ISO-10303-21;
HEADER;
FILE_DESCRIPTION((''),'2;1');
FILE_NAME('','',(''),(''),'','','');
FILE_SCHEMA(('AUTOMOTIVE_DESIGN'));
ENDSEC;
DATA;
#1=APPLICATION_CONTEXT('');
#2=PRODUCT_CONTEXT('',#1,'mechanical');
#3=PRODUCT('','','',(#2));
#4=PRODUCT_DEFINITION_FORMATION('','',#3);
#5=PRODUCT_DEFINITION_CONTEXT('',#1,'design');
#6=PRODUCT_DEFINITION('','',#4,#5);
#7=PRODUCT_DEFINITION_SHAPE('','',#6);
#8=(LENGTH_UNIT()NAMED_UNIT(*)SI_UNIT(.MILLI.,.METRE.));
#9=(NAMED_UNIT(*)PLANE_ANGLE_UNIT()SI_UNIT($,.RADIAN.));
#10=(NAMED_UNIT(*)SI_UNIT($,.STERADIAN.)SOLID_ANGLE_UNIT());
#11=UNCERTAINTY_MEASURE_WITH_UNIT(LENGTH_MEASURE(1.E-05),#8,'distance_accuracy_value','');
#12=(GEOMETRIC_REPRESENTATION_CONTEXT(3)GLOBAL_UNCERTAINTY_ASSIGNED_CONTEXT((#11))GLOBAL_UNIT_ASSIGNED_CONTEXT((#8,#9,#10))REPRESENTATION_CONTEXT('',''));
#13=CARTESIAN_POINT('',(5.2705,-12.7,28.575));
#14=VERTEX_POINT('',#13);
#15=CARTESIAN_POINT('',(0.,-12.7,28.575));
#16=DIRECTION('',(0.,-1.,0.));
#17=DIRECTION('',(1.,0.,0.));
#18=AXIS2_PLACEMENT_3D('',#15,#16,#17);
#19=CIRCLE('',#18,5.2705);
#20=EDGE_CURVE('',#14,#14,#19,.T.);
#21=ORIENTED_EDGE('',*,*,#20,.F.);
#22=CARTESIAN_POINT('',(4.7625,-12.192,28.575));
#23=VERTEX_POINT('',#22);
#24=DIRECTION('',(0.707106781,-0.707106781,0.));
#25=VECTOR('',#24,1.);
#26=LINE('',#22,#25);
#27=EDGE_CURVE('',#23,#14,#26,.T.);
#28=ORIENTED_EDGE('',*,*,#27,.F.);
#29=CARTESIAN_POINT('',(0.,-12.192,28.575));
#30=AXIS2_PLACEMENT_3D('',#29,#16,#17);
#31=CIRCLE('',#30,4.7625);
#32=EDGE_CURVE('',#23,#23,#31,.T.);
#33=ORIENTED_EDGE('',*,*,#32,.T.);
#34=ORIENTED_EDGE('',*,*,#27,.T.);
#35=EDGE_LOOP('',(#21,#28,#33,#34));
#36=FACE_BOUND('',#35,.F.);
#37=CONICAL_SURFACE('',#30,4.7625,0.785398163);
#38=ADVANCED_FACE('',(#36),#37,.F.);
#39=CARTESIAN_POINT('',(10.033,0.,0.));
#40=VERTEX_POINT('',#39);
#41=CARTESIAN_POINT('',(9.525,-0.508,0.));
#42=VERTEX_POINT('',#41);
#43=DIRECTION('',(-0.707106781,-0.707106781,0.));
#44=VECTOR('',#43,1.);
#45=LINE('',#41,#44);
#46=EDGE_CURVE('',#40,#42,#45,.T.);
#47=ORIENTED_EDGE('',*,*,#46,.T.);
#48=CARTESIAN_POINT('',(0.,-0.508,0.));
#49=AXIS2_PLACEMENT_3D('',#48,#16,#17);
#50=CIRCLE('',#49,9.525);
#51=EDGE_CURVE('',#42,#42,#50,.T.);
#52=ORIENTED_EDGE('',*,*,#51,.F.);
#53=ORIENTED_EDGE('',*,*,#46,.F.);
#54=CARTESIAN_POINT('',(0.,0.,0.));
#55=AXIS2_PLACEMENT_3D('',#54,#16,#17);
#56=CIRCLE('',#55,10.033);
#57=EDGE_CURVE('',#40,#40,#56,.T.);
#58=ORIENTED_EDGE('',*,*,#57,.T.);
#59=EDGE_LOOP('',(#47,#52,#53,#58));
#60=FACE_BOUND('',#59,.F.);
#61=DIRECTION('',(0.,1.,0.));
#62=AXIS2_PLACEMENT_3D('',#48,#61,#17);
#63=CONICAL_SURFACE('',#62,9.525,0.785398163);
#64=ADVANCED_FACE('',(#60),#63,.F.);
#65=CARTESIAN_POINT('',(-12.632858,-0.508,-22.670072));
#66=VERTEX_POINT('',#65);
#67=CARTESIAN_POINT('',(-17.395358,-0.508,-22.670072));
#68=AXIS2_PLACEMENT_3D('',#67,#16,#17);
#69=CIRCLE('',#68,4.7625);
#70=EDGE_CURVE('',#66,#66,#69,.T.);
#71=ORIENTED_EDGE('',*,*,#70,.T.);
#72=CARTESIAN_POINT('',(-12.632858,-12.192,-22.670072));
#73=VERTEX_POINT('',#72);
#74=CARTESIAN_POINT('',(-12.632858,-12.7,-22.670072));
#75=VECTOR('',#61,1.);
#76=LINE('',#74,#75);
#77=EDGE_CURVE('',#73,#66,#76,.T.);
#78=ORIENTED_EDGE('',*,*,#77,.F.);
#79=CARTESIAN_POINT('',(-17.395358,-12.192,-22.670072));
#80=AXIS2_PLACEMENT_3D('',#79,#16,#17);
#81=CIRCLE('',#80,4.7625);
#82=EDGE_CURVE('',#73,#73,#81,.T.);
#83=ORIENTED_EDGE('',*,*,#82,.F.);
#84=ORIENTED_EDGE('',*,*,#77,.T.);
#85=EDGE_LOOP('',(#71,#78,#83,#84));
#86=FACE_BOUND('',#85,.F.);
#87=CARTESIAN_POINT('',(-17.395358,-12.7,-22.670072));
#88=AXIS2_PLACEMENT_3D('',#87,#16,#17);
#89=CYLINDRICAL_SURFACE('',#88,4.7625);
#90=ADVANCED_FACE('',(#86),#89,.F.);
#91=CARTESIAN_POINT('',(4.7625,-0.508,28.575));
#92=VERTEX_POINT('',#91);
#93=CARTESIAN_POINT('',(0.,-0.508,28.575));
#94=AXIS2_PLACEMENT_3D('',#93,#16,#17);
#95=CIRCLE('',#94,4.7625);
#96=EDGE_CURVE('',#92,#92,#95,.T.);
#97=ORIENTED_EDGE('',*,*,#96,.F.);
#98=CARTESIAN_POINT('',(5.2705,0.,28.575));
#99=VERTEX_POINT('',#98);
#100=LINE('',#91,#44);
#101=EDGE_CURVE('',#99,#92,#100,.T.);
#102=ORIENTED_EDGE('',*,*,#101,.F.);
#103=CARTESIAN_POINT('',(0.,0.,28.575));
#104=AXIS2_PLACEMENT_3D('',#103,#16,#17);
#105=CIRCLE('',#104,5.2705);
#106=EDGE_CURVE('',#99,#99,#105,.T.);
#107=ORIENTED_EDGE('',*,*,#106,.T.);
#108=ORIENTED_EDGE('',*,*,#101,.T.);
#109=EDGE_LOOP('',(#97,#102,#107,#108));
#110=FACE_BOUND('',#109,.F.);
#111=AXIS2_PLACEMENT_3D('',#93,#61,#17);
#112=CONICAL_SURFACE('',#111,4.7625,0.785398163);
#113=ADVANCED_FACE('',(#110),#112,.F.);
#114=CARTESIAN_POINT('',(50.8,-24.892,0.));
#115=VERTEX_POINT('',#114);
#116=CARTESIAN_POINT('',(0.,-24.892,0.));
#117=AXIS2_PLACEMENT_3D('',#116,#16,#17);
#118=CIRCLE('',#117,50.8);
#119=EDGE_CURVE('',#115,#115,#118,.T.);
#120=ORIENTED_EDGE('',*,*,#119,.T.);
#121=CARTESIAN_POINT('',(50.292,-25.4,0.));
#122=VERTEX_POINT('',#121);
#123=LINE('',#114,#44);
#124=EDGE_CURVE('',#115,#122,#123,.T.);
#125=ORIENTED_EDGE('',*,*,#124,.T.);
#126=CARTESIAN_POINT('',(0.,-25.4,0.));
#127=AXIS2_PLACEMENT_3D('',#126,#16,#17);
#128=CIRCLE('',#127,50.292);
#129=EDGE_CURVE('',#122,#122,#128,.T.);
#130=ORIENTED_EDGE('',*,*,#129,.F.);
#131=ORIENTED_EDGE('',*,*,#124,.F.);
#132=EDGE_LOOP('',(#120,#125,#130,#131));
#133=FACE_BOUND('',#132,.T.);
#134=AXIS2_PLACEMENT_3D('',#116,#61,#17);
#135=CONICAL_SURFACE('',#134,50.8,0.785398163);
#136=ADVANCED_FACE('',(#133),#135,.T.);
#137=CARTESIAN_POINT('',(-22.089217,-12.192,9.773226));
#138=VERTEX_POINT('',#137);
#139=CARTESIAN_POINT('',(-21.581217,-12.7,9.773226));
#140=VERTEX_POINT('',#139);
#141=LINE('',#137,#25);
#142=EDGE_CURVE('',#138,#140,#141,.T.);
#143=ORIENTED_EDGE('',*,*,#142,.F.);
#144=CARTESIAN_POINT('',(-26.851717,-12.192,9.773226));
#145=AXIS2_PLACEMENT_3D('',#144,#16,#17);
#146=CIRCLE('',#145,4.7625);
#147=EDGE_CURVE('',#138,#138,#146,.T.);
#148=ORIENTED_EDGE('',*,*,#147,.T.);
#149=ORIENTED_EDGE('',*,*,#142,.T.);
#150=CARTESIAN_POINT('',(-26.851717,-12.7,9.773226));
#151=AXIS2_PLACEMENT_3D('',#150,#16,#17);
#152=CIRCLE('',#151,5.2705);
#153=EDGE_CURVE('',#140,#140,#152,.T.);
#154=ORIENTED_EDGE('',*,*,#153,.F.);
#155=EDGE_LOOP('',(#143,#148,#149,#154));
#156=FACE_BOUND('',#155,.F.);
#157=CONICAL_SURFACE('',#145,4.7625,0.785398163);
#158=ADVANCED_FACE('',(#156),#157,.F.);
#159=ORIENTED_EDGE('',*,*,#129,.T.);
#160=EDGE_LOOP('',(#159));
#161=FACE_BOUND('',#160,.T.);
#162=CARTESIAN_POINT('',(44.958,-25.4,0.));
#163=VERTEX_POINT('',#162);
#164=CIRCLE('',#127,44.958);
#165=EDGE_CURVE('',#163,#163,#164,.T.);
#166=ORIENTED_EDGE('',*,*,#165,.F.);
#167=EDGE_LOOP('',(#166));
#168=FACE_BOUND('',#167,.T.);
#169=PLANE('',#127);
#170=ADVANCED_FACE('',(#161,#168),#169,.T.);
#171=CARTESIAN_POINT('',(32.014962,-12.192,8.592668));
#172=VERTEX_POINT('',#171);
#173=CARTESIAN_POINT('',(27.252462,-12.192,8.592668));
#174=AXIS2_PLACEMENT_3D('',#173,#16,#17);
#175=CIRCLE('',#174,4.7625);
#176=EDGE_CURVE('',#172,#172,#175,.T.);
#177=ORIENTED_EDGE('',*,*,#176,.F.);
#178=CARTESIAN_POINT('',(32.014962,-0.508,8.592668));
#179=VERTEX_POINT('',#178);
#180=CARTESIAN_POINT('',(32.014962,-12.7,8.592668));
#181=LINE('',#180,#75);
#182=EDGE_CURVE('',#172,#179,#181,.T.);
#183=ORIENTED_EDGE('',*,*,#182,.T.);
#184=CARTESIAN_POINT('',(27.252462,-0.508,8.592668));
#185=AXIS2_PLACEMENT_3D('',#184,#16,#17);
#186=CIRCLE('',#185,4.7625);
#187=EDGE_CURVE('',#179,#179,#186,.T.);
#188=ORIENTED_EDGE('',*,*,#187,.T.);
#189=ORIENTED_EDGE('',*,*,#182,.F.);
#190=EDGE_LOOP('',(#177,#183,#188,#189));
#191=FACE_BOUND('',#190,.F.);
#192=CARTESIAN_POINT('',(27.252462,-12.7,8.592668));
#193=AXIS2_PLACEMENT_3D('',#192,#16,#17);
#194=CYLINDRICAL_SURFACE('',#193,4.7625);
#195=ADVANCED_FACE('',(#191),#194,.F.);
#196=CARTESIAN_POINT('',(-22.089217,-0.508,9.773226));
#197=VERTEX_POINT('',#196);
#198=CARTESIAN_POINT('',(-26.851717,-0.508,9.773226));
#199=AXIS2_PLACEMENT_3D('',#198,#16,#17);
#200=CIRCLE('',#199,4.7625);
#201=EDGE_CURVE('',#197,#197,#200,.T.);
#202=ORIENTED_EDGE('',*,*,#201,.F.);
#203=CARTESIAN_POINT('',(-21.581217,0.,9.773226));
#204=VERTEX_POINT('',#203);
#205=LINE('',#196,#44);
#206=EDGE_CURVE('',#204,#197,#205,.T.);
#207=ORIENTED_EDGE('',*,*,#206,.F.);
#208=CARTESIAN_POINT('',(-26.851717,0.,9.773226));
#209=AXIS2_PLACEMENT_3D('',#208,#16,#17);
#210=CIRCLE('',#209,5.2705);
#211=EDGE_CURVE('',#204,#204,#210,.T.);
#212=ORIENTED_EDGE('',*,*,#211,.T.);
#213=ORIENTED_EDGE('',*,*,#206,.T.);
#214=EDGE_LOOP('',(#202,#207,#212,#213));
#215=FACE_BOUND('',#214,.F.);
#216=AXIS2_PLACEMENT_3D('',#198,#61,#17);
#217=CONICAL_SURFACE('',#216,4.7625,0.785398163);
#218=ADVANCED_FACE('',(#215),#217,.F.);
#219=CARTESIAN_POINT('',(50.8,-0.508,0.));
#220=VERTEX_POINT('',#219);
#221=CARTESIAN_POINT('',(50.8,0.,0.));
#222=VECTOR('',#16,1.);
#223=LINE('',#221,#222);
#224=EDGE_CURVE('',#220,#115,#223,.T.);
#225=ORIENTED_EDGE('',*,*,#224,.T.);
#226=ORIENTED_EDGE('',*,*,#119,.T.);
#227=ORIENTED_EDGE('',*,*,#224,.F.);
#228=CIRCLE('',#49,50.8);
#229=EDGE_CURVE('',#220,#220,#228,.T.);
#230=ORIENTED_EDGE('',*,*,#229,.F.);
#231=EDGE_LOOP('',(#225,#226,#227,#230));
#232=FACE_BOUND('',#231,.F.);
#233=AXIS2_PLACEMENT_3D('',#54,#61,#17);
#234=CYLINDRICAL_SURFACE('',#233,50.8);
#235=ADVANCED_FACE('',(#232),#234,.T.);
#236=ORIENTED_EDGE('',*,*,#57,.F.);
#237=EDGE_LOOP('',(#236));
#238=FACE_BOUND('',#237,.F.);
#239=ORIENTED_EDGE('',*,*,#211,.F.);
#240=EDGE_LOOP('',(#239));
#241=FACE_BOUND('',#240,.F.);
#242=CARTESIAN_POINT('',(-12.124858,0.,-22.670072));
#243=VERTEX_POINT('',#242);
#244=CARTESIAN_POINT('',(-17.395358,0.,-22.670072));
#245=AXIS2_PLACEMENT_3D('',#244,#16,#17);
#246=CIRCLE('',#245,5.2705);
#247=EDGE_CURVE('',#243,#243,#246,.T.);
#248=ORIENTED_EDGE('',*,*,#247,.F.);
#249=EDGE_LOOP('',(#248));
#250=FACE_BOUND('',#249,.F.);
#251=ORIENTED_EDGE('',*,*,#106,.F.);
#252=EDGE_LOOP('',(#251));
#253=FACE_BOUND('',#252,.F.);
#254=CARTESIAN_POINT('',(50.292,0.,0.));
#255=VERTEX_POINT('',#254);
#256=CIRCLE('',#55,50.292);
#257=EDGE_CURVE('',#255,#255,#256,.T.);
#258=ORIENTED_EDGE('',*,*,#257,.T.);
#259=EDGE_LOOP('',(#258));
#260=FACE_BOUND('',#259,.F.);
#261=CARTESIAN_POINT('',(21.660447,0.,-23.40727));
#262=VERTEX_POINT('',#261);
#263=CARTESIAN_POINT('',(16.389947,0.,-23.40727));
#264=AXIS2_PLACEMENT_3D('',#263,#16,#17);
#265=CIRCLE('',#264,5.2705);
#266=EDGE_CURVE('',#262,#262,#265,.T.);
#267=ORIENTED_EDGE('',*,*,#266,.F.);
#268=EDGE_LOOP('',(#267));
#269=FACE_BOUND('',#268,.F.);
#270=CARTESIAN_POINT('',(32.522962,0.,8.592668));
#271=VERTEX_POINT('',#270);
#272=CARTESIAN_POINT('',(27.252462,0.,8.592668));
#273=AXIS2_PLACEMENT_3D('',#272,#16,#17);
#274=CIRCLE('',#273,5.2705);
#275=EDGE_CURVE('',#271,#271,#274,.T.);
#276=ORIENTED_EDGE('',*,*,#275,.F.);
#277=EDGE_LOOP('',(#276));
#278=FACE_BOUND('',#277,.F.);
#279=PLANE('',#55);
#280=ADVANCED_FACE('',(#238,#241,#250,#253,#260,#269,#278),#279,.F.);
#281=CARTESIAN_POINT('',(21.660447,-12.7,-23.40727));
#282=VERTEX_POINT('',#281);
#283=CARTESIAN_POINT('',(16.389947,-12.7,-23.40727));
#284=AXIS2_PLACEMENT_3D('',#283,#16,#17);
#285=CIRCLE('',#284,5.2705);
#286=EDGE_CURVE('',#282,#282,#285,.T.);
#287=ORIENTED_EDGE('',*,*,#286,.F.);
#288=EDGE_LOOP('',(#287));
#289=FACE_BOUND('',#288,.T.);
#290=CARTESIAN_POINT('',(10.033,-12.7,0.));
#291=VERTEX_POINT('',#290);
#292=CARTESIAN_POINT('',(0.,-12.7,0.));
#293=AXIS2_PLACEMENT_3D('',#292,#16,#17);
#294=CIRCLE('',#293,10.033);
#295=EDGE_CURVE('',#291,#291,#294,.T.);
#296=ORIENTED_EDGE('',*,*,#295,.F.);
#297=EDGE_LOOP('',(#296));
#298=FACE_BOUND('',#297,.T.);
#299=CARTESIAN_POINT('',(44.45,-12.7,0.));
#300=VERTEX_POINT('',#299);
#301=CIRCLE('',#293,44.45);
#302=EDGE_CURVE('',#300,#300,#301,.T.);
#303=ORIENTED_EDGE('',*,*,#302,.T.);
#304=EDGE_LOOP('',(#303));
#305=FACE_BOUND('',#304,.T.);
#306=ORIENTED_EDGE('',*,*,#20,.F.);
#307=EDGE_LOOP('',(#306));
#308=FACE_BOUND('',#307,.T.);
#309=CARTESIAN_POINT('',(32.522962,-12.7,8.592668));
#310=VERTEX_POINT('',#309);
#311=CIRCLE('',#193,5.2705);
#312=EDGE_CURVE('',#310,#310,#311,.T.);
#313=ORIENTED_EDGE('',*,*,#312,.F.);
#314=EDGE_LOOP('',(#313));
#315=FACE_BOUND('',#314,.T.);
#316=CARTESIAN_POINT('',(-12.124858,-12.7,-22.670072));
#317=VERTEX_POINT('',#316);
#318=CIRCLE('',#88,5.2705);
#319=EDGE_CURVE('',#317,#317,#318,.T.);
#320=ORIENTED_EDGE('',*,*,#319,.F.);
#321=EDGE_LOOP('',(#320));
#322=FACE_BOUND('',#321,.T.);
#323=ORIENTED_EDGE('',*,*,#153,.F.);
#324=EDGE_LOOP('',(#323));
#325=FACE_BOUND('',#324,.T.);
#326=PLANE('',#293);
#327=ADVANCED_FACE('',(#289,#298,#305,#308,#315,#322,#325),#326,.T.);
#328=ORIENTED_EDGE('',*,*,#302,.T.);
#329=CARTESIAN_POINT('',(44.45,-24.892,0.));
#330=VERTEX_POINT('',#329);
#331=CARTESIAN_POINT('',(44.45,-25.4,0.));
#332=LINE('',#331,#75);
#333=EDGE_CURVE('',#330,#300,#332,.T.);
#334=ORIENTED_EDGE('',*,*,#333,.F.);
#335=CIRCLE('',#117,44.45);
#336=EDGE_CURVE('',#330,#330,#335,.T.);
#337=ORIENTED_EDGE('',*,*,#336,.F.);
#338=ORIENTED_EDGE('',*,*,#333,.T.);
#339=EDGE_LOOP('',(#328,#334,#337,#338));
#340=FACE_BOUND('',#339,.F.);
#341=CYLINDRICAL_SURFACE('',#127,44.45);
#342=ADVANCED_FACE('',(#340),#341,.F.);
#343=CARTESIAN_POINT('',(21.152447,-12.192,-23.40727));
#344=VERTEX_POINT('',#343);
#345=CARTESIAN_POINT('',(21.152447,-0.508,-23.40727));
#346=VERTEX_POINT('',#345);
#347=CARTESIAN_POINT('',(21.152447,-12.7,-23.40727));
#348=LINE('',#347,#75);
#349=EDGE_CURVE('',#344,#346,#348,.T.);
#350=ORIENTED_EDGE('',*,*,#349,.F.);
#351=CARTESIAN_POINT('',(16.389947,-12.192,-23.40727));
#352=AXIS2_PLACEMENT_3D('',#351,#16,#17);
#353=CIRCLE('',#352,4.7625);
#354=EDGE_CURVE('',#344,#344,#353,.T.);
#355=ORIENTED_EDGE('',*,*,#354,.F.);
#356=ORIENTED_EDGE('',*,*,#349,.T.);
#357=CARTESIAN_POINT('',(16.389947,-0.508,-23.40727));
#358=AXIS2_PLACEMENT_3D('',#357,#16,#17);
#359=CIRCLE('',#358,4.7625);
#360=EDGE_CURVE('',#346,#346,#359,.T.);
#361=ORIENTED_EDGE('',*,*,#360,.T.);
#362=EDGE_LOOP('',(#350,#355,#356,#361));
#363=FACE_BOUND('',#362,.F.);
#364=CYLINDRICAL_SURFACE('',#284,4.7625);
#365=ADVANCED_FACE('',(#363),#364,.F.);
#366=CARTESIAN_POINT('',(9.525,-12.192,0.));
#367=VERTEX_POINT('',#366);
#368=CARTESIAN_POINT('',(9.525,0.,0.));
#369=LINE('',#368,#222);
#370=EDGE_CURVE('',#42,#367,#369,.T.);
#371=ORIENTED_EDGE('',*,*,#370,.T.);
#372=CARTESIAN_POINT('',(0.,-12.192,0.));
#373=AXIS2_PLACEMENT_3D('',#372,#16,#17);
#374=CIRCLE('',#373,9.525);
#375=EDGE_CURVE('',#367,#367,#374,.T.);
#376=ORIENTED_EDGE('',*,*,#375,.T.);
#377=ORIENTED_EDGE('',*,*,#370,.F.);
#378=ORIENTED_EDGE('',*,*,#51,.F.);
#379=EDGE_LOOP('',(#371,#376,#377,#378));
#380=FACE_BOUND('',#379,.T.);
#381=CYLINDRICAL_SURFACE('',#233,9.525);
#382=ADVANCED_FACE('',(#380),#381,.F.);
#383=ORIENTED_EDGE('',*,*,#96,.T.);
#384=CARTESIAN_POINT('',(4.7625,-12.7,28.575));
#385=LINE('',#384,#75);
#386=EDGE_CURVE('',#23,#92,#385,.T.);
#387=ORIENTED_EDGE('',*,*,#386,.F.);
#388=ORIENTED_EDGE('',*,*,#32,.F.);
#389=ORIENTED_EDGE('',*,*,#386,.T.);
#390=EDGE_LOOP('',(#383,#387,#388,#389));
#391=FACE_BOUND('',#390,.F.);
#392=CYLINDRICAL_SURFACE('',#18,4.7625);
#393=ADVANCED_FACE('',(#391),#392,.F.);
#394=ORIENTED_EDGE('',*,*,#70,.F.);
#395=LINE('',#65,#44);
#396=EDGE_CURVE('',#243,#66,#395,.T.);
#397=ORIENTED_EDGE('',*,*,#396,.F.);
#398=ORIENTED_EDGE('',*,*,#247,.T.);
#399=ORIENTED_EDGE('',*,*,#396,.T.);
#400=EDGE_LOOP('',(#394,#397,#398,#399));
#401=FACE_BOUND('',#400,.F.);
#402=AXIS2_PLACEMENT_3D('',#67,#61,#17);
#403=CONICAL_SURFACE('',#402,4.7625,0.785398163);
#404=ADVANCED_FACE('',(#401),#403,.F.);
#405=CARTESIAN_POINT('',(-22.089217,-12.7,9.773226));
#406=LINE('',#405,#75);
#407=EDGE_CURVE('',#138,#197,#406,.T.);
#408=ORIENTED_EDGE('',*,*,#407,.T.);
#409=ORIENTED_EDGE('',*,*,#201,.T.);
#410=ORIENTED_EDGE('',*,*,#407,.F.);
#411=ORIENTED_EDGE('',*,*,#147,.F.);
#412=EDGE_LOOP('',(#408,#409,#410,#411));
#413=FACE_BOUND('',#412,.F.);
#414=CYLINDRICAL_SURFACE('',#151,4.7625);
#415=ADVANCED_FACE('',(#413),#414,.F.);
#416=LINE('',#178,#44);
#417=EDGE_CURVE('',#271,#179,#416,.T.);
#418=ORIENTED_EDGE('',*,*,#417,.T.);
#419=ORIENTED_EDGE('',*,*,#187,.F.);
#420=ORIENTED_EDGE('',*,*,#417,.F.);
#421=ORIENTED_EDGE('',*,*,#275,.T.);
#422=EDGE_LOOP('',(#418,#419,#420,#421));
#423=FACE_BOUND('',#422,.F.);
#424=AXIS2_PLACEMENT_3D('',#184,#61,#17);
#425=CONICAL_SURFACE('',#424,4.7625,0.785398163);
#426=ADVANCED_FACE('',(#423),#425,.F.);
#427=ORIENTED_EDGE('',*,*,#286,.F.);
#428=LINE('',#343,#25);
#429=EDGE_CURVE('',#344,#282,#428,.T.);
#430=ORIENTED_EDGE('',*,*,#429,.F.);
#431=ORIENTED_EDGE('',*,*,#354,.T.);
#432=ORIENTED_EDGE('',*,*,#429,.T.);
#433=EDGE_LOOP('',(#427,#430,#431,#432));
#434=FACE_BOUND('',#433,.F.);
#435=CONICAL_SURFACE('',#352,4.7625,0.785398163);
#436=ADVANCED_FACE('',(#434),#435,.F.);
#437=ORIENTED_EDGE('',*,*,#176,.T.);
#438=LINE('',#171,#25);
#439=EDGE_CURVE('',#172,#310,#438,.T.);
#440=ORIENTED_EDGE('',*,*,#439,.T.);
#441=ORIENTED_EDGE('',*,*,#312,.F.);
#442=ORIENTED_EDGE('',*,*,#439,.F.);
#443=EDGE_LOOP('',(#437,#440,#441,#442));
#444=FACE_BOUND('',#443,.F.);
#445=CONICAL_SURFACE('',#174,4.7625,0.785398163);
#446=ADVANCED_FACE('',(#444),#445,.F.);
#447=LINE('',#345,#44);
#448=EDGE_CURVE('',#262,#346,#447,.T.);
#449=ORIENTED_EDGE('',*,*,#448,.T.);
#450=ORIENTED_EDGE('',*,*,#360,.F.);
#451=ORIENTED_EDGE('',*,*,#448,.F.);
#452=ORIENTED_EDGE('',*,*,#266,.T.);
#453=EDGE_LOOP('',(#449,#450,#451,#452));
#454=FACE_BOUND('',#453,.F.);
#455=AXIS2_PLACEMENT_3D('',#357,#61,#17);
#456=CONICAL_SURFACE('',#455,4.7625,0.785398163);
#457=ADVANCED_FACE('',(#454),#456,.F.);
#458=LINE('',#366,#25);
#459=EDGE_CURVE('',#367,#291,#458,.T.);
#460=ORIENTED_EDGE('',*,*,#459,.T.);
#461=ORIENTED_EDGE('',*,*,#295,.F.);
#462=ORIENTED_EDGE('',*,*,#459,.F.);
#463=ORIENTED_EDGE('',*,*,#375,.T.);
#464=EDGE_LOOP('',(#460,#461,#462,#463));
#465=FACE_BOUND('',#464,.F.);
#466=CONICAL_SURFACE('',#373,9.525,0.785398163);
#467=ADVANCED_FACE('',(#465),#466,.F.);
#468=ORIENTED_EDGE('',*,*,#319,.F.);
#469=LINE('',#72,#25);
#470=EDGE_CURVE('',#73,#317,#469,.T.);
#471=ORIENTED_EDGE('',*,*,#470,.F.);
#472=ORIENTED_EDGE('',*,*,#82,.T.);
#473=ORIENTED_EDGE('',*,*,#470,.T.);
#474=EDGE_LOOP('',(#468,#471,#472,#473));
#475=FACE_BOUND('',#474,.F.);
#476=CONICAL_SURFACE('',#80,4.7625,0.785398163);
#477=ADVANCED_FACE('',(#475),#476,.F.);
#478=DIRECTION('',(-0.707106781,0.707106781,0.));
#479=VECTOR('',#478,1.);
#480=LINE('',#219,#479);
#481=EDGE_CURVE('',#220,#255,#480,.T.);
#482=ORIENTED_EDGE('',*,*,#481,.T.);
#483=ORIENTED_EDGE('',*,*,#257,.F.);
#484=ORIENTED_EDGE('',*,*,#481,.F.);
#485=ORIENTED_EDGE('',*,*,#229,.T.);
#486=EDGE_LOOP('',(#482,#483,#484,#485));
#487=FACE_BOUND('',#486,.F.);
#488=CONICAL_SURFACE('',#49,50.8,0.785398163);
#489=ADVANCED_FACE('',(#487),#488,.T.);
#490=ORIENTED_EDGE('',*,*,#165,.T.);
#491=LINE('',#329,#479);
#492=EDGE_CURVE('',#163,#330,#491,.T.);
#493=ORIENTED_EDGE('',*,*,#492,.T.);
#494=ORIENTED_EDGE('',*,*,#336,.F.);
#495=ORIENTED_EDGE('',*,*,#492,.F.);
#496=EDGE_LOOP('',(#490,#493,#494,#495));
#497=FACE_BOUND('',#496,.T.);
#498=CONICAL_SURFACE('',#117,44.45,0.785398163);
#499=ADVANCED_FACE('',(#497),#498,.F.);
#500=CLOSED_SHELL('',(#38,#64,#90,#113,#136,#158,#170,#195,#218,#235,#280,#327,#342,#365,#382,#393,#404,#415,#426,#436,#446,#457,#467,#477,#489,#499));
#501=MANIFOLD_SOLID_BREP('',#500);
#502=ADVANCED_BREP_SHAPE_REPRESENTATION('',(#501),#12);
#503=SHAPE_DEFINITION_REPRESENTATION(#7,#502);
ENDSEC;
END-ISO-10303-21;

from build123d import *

# Parameters (mm, degrees)
F0_R     = 50.8
F0_R_2   = 9.525
F1_DEPTH = 25.4
F2_R     = 44.45
F2_R_2   = 9.525
F3_DEPTH = 12.7
F4_R     = 4.7625
F5_DEPTH = 12.701
F6_SIZE  = 0.508


with BuildPart() as f1:
    # F0 (on Front) → F1 (new body)
    with BuildSketch(Plane.XZ):
        Circle(F0_R)
        Circle(F0_R_2, mode=Mode.SUBTRACT)
    extrude(amount=F1_DEPTH)

    # F2 (on face) → F3 (cut)
    with BuildSketch(Plane.XZ.offset(25.4)):
        Circle(F2_R)
        Circle(F2_R_2, mode=Mode.SUBTRACT)
    extrude(amount=-F3_DEPTH, mode=Mode.SUBTRACT)

    # F4 (on face) → F5 (cut, through all)
    with BuildSketch(Plane.XZ.offset(12.7)):
        with Locations((-26.851716639, 9.7732255955)):
            Circle(F4_R)
        with Locations((0, 28.575)):
            Circle(F4_R)
        with Locations((27.2524618676, 8.5926682208)):
            Circle(F4_R)
        with Locations((16.3899466687, -23.4072696656)):
            Circle(F4_R)
        with Locations((-17.3953578339, -22.6700716988)):
            Circle(F4_R)
    extrude(amount=-F5_DEPTH, mode=Mode.SUBTRACT)

    # F6
    f6_edges = [f1.edges().sort_by_distance(p)[0] for p in [
        (-44.45, -25.4, 0),
        (-4.7625, -12.7, 28.575),
        (-31.614217, -12.7, 9.773226),
        (-9.525, -12.7, 0),
        (-22.157858, -12.7, -22.670072),
        (-50.8, 0, 0),
        (11.627447, -12.7, -23.40727),
        (22.489962, -12.7, 8.592668),
        (-50.8, -25.4, 0),
        (-4.7625, 0, 28.575),
        (-31.614217, 0, 9.773226),
        (-22.157858, 0, -22.670072),
        (11.627447, 0, -23.40727),
        (22.489962, 0, 8.592668),
        (-9.525, 0, 0),
    ]]
    chamfer(f6_edges, length=F6_SIZE)


solid = f1.part
